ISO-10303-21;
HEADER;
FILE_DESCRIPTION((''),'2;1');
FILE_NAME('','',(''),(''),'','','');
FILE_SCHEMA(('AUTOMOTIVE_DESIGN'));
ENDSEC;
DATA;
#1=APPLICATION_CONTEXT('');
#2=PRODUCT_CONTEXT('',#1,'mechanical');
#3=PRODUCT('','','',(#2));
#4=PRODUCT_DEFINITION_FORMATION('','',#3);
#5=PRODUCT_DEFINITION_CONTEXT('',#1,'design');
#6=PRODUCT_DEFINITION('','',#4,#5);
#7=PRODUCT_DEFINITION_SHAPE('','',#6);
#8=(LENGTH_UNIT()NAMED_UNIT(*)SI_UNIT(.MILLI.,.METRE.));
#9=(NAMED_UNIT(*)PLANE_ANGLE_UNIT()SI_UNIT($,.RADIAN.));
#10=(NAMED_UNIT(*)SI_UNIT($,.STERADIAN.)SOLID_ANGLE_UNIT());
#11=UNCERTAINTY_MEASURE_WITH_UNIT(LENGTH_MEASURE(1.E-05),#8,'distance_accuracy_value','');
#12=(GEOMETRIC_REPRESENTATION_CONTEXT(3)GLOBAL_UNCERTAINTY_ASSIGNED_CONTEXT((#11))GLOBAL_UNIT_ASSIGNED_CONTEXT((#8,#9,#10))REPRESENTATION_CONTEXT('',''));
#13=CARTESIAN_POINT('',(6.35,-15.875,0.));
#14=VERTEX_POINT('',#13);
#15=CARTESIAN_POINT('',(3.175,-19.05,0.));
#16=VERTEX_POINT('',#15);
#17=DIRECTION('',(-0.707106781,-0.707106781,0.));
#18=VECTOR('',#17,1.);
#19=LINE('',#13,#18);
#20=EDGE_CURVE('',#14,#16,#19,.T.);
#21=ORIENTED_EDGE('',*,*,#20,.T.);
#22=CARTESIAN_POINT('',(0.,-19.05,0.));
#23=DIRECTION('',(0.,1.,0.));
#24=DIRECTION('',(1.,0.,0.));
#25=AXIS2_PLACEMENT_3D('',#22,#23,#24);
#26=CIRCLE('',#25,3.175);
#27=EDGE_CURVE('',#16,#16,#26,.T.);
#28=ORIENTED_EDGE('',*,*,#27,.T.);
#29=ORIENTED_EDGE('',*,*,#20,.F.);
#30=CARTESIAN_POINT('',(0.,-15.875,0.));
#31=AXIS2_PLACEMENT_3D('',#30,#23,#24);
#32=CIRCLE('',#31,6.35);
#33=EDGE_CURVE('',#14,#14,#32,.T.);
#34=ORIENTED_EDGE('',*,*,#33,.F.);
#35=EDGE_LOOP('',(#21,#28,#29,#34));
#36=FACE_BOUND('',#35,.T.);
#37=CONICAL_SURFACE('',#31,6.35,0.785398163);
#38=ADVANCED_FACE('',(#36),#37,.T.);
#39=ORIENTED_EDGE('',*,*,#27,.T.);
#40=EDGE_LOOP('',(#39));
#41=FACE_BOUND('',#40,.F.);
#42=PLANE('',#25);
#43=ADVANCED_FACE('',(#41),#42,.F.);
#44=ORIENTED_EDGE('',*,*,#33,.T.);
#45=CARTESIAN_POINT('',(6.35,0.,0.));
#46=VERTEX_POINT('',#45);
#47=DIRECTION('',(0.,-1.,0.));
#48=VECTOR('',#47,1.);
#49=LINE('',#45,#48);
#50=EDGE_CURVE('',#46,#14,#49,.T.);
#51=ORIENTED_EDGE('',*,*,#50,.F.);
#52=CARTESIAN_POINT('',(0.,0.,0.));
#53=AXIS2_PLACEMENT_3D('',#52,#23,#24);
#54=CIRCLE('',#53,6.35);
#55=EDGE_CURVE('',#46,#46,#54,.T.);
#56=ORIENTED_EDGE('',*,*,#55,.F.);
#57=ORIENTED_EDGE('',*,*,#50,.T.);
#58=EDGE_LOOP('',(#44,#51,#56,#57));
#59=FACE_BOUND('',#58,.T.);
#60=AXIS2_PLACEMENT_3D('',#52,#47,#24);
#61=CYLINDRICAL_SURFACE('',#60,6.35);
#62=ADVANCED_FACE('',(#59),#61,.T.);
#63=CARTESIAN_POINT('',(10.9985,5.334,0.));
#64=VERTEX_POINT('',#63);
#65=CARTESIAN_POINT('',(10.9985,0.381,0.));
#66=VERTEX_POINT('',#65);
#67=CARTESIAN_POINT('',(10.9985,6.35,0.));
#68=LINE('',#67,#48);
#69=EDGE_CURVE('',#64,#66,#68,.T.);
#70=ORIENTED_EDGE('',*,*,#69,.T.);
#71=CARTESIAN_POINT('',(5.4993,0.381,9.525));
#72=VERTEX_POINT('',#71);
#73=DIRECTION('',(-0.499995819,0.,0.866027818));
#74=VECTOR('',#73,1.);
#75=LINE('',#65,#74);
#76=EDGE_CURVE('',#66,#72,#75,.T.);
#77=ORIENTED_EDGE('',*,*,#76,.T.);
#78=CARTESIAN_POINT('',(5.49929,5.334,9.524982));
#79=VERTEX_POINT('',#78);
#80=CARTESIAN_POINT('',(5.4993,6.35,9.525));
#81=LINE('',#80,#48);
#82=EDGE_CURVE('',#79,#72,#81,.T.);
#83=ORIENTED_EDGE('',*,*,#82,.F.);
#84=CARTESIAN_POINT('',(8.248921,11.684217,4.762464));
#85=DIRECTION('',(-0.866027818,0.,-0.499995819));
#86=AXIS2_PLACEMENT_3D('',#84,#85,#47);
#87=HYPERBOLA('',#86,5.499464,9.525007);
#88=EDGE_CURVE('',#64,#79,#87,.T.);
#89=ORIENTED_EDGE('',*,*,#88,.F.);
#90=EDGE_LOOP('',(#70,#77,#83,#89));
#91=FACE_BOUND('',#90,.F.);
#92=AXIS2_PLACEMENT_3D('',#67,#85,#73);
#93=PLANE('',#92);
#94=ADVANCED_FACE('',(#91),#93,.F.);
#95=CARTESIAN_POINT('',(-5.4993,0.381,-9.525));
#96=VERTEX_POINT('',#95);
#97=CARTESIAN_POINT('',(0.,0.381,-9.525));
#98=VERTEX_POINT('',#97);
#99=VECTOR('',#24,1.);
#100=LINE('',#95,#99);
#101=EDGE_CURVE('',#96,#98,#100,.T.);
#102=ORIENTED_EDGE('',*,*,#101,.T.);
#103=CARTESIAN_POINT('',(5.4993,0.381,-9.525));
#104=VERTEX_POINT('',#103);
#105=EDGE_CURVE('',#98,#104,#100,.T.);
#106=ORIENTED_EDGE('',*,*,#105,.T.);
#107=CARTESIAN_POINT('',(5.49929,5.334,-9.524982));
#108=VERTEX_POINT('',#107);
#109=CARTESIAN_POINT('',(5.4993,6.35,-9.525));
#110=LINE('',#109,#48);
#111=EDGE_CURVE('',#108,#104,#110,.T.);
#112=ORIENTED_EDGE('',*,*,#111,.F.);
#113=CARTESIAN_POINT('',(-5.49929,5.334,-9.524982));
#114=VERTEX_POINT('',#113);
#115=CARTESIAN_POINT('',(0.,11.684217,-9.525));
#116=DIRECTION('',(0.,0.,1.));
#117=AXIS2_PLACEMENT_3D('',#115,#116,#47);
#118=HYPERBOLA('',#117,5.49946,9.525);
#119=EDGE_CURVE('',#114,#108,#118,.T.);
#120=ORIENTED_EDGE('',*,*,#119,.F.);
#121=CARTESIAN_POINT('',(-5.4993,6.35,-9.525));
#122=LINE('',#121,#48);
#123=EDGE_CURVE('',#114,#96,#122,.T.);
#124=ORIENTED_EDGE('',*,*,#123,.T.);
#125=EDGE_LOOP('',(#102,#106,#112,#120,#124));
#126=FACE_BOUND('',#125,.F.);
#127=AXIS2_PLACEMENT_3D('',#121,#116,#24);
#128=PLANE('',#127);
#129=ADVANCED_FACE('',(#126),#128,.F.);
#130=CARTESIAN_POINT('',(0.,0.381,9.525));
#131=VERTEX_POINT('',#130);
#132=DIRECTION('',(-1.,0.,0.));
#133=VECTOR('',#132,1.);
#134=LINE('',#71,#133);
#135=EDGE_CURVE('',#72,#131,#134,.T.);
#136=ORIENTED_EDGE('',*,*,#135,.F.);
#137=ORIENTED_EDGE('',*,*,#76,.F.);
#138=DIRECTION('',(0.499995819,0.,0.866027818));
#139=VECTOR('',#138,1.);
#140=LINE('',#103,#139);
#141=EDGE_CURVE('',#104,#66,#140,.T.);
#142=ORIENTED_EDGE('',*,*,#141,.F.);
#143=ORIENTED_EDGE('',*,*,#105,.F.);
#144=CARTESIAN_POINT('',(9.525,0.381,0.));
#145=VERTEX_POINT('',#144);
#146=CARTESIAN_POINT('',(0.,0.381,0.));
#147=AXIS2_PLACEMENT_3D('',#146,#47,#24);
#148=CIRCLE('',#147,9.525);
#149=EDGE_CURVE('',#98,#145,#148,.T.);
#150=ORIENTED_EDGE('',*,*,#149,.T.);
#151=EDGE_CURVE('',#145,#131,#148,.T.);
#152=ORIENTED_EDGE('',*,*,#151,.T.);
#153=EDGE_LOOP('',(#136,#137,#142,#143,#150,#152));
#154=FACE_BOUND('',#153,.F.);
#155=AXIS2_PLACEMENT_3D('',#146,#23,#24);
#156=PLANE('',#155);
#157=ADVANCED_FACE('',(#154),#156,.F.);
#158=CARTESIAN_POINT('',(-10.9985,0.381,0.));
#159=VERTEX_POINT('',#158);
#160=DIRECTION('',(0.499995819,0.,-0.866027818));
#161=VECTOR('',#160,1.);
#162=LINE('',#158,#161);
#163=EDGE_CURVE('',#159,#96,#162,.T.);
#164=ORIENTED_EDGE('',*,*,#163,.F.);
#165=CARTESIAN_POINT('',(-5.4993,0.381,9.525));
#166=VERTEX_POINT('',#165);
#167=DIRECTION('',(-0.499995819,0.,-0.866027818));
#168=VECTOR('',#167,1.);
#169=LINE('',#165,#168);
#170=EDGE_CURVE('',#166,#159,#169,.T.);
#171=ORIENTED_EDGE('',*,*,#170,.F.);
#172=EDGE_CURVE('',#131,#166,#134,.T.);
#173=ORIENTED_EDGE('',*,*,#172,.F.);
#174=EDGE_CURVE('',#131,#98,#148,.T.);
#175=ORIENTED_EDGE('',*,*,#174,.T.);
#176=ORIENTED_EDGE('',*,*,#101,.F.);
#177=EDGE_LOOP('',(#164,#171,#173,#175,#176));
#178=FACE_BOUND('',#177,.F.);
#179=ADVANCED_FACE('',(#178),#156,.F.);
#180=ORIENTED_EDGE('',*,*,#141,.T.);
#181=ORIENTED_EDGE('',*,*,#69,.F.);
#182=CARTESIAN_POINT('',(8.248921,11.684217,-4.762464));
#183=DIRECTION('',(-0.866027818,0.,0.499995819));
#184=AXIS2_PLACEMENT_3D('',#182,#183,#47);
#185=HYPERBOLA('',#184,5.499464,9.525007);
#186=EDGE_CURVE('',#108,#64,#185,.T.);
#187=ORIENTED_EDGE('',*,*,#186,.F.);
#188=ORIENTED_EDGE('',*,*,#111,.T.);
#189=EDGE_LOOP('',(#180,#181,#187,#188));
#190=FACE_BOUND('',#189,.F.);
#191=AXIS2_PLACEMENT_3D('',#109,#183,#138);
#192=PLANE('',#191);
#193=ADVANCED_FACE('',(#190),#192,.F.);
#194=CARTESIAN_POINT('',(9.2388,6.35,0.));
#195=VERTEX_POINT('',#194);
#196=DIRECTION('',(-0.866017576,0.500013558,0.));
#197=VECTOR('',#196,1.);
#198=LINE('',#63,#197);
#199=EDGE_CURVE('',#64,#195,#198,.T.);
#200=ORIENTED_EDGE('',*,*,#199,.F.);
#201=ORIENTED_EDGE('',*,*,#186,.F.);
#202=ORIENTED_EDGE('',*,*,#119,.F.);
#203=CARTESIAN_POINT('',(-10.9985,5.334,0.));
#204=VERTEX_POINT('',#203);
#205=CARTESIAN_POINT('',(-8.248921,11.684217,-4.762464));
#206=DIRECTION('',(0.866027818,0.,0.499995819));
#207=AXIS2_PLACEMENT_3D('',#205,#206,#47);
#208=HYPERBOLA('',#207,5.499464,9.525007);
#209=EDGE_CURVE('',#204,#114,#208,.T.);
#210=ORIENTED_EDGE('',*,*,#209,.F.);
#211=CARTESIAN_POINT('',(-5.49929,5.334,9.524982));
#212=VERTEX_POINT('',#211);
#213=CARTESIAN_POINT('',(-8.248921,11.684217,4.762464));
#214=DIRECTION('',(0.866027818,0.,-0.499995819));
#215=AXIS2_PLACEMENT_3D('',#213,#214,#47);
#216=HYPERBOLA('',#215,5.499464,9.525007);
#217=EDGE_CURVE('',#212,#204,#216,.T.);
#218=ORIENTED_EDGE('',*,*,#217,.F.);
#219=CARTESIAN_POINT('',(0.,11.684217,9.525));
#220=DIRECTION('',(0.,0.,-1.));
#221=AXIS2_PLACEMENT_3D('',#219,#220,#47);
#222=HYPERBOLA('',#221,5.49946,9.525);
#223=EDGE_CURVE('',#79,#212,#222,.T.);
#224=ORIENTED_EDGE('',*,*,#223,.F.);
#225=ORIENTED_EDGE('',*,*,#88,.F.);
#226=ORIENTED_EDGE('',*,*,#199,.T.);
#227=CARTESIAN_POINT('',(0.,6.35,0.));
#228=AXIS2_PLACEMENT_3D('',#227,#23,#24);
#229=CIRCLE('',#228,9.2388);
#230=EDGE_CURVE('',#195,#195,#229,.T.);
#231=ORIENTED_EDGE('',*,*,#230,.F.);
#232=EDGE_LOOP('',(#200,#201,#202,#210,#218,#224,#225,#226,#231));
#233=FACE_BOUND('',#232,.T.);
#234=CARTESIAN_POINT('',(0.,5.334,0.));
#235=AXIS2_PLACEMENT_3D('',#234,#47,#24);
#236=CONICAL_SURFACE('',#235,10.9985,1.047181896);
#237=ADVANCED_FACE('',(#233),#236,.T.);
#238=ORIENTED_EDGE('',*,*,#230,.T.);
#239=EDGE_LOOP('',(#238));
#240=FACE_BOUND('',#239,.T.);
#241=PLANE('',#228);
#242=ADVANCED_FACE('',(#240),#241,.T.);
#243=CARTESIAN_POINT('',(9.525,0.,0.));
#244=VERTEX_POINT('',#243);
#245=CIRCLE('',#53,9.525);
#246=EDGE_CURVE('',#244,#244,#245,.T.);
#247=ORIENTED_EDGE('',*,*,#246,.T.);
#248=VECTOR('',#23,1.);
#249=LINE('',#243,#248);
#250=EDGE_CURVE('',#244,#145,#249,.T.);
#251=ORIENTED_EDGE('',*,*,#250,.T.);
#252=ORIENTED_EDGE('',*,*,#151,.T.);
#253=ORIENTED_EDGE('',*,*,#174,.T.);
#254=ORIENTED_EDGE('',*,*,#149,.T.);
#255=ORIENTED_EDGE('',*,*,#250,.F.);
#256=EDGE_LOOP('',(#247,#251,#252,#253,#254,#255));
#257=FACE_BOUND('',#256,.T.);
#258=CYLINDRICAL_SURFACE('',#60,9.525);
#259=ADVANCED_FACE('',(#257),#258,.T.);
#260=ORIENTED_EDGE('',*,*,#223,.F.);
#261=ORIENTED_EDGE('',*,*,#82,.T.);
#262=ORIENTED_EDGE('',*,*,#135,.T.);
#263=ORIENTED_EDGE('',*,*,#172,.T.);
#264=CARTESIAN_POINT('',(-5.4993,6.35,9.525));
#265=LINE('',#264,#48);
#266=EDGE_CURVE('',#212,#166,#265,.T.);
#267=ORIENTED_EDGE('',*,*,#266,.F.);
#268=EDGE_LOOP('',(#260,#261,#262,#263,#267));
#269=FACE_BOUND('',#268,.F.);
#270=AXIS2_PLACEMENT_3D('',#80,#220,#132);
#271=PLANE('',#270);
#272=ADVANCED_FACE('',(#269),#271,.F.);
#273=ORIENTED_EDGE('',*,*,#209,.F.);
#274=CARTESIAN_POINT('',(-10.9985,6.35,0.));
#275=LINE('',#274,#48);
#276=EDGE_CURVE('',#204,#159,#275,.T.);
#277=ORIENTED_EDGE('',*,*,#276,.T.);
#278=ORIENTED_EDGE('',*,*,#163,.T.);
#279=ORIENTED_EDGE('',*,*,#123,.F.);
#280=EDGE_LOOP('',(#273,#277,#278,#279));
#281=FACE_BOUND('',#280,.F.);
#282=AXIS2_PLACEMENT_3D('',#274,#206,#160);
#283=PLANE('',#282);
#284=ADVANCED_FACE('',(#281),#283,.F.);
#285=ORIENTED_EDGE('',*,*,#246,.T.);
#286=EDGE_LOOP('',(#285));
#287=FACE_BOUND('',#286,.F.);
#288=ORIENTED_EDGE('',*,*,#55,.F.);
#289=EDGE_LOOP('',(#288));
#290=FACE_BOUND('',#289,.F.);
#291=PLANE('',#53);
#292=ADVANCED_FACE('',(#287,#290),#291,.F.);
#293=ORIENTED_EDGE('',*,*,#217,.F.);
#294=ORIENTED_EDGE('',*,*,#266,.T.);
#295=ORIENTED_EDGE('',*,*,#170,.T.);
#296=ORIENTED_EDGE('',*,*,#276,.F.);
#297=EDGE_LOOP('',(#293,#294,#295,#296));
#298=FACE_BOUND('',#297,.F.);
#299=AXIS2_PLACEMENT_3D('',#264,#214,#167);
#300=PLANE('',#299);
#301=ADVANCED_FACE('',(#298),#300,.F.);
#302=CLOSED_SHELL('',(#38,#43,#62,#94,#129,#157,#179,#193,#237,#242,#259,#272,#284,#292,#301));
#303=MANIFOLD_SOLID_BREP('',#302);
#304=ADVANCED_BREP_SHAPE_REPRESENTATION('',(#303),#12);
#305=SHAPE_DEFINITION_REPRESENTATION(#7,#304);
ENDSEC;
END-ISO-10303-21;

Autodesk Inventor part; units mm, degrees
ref_plane "YZ Plane" through (0, 0, 0) normal (1, 0, 0) x (0, 1, 0)
ref_plane "XZ Plane" through (0, 0, 0) normal (0, 1, 0) x (-1, 0, 0)
ref_plane "XY Plane" through (0, 0, 0) normal (0, 0, 1) x (1, 0, 0)
sketch "Sketch1" plane through (0, 0, 0) normal (0, 0, 1) x (1, 0, 0)
  line L0 (0, 0) -> (6.35, 0)
  line L1 (6.35, 0) -> (6.35, -19.05)
  line L2 (6.35, -19.05) -> (0, -19.05)
  line L3 (0, -19.05) -> (0, 0)
  dimension "d0" = 12.7
  dimension "d1" = 19.05
revolve "Revolution1" add sketch "Sketch1" angle 360 about axis through (0, -19.05, 0) along (0, 1, 0)
chamfer "Chamfer1" distance 3.175 angle 45 1 edges at (-6.35, -19.05, 0)
sketch "Sketch2" plane through (0, 0, 0) normal (0, 1, 0) x (1, 0, 0)
  circle A0 centre (0, 0) radius 9.525
  point P0 (0, 0)
  dimension "d6" = 19.05
extrude "Extrusion1" add sketch "Sketch2" along normal blind 6.35
sketch "Sketch3" plane through (0, 6.35, 0) normal (0, 1, 0) x (1, 0, 0)
  line L0 (10.9985, 0) -> (5.4993, -9.525)
  line L1 (5.4993, -9.525) -> (-5.4993, -9.525)
  line L2 (-5.4993, -9.525) -> (-10.9985, 0)
  line L3 (-10.9985, 0) -> (-5.4993, 9.525)
  line L4 (-5.4993, 9.525) -> (5.4993, 9.525)
  line L5 (5.4993, 9.525) -> (10.9985, 0)
  circle A0 centre (0, 0) radius 9.525 construction
  point P0 (0, 0)
  point P1 (0, 0)
extrude "Extrusion2" add sketch "Sketch3" against normal blind 5.969
sketch "Sketch4" plane through (0, 0, 0) normal (0, 0, 1) x (1, 0, 0)
  line L0 (9.2388, 6.35) -> (10.9985, 6.35)
  line L1 (10.9985, 6.35) -> (10.9985, 5.334)
  line L2 (10.9985, 5.334) -> (9.2388, 6.35)
  line L3 (0, -1.5875) -> (0, 9.525) projected
  line L4 (5.4993, 0) -> (10.9985, 0) construction
  line L5 (5.4993, 6.35) -> (10.9985, 6.35) construction
  line L6 (5.4993, 6.35) -> (5.4993, 0.381) construction
  line L7 (10.9985, 6.35) -> (10.9985, 0.381) construction
  line L8 (10.9985, 6.35) -> (5.4993, 6.35) projected
  line L9 (8.2489, 0.381) -> (10.9985, 0.381) projected
  line L10 (5.4993, 0.381) -> (8.2489, 0.381) projected
  point P0 (0, 0)
  point P1 (16.2522, 7.9375)
  dimension "d11" = 30
  dimension "d17" = 1.016
revolve "Revolution2" cut sketch "Sketch4" angle 360 about axis through (0, -10, 0) along (0, 1, 0)
thread "Thread3" size "1/2-13 UNC" class "2A" standard "ANSI Unified Screw Threads" full length
equation "\"diameter\" = 1.8542"
equation "\"length\" = 19.05"
properties part number "Door Plate Screw" material "Steel, Carbon"
